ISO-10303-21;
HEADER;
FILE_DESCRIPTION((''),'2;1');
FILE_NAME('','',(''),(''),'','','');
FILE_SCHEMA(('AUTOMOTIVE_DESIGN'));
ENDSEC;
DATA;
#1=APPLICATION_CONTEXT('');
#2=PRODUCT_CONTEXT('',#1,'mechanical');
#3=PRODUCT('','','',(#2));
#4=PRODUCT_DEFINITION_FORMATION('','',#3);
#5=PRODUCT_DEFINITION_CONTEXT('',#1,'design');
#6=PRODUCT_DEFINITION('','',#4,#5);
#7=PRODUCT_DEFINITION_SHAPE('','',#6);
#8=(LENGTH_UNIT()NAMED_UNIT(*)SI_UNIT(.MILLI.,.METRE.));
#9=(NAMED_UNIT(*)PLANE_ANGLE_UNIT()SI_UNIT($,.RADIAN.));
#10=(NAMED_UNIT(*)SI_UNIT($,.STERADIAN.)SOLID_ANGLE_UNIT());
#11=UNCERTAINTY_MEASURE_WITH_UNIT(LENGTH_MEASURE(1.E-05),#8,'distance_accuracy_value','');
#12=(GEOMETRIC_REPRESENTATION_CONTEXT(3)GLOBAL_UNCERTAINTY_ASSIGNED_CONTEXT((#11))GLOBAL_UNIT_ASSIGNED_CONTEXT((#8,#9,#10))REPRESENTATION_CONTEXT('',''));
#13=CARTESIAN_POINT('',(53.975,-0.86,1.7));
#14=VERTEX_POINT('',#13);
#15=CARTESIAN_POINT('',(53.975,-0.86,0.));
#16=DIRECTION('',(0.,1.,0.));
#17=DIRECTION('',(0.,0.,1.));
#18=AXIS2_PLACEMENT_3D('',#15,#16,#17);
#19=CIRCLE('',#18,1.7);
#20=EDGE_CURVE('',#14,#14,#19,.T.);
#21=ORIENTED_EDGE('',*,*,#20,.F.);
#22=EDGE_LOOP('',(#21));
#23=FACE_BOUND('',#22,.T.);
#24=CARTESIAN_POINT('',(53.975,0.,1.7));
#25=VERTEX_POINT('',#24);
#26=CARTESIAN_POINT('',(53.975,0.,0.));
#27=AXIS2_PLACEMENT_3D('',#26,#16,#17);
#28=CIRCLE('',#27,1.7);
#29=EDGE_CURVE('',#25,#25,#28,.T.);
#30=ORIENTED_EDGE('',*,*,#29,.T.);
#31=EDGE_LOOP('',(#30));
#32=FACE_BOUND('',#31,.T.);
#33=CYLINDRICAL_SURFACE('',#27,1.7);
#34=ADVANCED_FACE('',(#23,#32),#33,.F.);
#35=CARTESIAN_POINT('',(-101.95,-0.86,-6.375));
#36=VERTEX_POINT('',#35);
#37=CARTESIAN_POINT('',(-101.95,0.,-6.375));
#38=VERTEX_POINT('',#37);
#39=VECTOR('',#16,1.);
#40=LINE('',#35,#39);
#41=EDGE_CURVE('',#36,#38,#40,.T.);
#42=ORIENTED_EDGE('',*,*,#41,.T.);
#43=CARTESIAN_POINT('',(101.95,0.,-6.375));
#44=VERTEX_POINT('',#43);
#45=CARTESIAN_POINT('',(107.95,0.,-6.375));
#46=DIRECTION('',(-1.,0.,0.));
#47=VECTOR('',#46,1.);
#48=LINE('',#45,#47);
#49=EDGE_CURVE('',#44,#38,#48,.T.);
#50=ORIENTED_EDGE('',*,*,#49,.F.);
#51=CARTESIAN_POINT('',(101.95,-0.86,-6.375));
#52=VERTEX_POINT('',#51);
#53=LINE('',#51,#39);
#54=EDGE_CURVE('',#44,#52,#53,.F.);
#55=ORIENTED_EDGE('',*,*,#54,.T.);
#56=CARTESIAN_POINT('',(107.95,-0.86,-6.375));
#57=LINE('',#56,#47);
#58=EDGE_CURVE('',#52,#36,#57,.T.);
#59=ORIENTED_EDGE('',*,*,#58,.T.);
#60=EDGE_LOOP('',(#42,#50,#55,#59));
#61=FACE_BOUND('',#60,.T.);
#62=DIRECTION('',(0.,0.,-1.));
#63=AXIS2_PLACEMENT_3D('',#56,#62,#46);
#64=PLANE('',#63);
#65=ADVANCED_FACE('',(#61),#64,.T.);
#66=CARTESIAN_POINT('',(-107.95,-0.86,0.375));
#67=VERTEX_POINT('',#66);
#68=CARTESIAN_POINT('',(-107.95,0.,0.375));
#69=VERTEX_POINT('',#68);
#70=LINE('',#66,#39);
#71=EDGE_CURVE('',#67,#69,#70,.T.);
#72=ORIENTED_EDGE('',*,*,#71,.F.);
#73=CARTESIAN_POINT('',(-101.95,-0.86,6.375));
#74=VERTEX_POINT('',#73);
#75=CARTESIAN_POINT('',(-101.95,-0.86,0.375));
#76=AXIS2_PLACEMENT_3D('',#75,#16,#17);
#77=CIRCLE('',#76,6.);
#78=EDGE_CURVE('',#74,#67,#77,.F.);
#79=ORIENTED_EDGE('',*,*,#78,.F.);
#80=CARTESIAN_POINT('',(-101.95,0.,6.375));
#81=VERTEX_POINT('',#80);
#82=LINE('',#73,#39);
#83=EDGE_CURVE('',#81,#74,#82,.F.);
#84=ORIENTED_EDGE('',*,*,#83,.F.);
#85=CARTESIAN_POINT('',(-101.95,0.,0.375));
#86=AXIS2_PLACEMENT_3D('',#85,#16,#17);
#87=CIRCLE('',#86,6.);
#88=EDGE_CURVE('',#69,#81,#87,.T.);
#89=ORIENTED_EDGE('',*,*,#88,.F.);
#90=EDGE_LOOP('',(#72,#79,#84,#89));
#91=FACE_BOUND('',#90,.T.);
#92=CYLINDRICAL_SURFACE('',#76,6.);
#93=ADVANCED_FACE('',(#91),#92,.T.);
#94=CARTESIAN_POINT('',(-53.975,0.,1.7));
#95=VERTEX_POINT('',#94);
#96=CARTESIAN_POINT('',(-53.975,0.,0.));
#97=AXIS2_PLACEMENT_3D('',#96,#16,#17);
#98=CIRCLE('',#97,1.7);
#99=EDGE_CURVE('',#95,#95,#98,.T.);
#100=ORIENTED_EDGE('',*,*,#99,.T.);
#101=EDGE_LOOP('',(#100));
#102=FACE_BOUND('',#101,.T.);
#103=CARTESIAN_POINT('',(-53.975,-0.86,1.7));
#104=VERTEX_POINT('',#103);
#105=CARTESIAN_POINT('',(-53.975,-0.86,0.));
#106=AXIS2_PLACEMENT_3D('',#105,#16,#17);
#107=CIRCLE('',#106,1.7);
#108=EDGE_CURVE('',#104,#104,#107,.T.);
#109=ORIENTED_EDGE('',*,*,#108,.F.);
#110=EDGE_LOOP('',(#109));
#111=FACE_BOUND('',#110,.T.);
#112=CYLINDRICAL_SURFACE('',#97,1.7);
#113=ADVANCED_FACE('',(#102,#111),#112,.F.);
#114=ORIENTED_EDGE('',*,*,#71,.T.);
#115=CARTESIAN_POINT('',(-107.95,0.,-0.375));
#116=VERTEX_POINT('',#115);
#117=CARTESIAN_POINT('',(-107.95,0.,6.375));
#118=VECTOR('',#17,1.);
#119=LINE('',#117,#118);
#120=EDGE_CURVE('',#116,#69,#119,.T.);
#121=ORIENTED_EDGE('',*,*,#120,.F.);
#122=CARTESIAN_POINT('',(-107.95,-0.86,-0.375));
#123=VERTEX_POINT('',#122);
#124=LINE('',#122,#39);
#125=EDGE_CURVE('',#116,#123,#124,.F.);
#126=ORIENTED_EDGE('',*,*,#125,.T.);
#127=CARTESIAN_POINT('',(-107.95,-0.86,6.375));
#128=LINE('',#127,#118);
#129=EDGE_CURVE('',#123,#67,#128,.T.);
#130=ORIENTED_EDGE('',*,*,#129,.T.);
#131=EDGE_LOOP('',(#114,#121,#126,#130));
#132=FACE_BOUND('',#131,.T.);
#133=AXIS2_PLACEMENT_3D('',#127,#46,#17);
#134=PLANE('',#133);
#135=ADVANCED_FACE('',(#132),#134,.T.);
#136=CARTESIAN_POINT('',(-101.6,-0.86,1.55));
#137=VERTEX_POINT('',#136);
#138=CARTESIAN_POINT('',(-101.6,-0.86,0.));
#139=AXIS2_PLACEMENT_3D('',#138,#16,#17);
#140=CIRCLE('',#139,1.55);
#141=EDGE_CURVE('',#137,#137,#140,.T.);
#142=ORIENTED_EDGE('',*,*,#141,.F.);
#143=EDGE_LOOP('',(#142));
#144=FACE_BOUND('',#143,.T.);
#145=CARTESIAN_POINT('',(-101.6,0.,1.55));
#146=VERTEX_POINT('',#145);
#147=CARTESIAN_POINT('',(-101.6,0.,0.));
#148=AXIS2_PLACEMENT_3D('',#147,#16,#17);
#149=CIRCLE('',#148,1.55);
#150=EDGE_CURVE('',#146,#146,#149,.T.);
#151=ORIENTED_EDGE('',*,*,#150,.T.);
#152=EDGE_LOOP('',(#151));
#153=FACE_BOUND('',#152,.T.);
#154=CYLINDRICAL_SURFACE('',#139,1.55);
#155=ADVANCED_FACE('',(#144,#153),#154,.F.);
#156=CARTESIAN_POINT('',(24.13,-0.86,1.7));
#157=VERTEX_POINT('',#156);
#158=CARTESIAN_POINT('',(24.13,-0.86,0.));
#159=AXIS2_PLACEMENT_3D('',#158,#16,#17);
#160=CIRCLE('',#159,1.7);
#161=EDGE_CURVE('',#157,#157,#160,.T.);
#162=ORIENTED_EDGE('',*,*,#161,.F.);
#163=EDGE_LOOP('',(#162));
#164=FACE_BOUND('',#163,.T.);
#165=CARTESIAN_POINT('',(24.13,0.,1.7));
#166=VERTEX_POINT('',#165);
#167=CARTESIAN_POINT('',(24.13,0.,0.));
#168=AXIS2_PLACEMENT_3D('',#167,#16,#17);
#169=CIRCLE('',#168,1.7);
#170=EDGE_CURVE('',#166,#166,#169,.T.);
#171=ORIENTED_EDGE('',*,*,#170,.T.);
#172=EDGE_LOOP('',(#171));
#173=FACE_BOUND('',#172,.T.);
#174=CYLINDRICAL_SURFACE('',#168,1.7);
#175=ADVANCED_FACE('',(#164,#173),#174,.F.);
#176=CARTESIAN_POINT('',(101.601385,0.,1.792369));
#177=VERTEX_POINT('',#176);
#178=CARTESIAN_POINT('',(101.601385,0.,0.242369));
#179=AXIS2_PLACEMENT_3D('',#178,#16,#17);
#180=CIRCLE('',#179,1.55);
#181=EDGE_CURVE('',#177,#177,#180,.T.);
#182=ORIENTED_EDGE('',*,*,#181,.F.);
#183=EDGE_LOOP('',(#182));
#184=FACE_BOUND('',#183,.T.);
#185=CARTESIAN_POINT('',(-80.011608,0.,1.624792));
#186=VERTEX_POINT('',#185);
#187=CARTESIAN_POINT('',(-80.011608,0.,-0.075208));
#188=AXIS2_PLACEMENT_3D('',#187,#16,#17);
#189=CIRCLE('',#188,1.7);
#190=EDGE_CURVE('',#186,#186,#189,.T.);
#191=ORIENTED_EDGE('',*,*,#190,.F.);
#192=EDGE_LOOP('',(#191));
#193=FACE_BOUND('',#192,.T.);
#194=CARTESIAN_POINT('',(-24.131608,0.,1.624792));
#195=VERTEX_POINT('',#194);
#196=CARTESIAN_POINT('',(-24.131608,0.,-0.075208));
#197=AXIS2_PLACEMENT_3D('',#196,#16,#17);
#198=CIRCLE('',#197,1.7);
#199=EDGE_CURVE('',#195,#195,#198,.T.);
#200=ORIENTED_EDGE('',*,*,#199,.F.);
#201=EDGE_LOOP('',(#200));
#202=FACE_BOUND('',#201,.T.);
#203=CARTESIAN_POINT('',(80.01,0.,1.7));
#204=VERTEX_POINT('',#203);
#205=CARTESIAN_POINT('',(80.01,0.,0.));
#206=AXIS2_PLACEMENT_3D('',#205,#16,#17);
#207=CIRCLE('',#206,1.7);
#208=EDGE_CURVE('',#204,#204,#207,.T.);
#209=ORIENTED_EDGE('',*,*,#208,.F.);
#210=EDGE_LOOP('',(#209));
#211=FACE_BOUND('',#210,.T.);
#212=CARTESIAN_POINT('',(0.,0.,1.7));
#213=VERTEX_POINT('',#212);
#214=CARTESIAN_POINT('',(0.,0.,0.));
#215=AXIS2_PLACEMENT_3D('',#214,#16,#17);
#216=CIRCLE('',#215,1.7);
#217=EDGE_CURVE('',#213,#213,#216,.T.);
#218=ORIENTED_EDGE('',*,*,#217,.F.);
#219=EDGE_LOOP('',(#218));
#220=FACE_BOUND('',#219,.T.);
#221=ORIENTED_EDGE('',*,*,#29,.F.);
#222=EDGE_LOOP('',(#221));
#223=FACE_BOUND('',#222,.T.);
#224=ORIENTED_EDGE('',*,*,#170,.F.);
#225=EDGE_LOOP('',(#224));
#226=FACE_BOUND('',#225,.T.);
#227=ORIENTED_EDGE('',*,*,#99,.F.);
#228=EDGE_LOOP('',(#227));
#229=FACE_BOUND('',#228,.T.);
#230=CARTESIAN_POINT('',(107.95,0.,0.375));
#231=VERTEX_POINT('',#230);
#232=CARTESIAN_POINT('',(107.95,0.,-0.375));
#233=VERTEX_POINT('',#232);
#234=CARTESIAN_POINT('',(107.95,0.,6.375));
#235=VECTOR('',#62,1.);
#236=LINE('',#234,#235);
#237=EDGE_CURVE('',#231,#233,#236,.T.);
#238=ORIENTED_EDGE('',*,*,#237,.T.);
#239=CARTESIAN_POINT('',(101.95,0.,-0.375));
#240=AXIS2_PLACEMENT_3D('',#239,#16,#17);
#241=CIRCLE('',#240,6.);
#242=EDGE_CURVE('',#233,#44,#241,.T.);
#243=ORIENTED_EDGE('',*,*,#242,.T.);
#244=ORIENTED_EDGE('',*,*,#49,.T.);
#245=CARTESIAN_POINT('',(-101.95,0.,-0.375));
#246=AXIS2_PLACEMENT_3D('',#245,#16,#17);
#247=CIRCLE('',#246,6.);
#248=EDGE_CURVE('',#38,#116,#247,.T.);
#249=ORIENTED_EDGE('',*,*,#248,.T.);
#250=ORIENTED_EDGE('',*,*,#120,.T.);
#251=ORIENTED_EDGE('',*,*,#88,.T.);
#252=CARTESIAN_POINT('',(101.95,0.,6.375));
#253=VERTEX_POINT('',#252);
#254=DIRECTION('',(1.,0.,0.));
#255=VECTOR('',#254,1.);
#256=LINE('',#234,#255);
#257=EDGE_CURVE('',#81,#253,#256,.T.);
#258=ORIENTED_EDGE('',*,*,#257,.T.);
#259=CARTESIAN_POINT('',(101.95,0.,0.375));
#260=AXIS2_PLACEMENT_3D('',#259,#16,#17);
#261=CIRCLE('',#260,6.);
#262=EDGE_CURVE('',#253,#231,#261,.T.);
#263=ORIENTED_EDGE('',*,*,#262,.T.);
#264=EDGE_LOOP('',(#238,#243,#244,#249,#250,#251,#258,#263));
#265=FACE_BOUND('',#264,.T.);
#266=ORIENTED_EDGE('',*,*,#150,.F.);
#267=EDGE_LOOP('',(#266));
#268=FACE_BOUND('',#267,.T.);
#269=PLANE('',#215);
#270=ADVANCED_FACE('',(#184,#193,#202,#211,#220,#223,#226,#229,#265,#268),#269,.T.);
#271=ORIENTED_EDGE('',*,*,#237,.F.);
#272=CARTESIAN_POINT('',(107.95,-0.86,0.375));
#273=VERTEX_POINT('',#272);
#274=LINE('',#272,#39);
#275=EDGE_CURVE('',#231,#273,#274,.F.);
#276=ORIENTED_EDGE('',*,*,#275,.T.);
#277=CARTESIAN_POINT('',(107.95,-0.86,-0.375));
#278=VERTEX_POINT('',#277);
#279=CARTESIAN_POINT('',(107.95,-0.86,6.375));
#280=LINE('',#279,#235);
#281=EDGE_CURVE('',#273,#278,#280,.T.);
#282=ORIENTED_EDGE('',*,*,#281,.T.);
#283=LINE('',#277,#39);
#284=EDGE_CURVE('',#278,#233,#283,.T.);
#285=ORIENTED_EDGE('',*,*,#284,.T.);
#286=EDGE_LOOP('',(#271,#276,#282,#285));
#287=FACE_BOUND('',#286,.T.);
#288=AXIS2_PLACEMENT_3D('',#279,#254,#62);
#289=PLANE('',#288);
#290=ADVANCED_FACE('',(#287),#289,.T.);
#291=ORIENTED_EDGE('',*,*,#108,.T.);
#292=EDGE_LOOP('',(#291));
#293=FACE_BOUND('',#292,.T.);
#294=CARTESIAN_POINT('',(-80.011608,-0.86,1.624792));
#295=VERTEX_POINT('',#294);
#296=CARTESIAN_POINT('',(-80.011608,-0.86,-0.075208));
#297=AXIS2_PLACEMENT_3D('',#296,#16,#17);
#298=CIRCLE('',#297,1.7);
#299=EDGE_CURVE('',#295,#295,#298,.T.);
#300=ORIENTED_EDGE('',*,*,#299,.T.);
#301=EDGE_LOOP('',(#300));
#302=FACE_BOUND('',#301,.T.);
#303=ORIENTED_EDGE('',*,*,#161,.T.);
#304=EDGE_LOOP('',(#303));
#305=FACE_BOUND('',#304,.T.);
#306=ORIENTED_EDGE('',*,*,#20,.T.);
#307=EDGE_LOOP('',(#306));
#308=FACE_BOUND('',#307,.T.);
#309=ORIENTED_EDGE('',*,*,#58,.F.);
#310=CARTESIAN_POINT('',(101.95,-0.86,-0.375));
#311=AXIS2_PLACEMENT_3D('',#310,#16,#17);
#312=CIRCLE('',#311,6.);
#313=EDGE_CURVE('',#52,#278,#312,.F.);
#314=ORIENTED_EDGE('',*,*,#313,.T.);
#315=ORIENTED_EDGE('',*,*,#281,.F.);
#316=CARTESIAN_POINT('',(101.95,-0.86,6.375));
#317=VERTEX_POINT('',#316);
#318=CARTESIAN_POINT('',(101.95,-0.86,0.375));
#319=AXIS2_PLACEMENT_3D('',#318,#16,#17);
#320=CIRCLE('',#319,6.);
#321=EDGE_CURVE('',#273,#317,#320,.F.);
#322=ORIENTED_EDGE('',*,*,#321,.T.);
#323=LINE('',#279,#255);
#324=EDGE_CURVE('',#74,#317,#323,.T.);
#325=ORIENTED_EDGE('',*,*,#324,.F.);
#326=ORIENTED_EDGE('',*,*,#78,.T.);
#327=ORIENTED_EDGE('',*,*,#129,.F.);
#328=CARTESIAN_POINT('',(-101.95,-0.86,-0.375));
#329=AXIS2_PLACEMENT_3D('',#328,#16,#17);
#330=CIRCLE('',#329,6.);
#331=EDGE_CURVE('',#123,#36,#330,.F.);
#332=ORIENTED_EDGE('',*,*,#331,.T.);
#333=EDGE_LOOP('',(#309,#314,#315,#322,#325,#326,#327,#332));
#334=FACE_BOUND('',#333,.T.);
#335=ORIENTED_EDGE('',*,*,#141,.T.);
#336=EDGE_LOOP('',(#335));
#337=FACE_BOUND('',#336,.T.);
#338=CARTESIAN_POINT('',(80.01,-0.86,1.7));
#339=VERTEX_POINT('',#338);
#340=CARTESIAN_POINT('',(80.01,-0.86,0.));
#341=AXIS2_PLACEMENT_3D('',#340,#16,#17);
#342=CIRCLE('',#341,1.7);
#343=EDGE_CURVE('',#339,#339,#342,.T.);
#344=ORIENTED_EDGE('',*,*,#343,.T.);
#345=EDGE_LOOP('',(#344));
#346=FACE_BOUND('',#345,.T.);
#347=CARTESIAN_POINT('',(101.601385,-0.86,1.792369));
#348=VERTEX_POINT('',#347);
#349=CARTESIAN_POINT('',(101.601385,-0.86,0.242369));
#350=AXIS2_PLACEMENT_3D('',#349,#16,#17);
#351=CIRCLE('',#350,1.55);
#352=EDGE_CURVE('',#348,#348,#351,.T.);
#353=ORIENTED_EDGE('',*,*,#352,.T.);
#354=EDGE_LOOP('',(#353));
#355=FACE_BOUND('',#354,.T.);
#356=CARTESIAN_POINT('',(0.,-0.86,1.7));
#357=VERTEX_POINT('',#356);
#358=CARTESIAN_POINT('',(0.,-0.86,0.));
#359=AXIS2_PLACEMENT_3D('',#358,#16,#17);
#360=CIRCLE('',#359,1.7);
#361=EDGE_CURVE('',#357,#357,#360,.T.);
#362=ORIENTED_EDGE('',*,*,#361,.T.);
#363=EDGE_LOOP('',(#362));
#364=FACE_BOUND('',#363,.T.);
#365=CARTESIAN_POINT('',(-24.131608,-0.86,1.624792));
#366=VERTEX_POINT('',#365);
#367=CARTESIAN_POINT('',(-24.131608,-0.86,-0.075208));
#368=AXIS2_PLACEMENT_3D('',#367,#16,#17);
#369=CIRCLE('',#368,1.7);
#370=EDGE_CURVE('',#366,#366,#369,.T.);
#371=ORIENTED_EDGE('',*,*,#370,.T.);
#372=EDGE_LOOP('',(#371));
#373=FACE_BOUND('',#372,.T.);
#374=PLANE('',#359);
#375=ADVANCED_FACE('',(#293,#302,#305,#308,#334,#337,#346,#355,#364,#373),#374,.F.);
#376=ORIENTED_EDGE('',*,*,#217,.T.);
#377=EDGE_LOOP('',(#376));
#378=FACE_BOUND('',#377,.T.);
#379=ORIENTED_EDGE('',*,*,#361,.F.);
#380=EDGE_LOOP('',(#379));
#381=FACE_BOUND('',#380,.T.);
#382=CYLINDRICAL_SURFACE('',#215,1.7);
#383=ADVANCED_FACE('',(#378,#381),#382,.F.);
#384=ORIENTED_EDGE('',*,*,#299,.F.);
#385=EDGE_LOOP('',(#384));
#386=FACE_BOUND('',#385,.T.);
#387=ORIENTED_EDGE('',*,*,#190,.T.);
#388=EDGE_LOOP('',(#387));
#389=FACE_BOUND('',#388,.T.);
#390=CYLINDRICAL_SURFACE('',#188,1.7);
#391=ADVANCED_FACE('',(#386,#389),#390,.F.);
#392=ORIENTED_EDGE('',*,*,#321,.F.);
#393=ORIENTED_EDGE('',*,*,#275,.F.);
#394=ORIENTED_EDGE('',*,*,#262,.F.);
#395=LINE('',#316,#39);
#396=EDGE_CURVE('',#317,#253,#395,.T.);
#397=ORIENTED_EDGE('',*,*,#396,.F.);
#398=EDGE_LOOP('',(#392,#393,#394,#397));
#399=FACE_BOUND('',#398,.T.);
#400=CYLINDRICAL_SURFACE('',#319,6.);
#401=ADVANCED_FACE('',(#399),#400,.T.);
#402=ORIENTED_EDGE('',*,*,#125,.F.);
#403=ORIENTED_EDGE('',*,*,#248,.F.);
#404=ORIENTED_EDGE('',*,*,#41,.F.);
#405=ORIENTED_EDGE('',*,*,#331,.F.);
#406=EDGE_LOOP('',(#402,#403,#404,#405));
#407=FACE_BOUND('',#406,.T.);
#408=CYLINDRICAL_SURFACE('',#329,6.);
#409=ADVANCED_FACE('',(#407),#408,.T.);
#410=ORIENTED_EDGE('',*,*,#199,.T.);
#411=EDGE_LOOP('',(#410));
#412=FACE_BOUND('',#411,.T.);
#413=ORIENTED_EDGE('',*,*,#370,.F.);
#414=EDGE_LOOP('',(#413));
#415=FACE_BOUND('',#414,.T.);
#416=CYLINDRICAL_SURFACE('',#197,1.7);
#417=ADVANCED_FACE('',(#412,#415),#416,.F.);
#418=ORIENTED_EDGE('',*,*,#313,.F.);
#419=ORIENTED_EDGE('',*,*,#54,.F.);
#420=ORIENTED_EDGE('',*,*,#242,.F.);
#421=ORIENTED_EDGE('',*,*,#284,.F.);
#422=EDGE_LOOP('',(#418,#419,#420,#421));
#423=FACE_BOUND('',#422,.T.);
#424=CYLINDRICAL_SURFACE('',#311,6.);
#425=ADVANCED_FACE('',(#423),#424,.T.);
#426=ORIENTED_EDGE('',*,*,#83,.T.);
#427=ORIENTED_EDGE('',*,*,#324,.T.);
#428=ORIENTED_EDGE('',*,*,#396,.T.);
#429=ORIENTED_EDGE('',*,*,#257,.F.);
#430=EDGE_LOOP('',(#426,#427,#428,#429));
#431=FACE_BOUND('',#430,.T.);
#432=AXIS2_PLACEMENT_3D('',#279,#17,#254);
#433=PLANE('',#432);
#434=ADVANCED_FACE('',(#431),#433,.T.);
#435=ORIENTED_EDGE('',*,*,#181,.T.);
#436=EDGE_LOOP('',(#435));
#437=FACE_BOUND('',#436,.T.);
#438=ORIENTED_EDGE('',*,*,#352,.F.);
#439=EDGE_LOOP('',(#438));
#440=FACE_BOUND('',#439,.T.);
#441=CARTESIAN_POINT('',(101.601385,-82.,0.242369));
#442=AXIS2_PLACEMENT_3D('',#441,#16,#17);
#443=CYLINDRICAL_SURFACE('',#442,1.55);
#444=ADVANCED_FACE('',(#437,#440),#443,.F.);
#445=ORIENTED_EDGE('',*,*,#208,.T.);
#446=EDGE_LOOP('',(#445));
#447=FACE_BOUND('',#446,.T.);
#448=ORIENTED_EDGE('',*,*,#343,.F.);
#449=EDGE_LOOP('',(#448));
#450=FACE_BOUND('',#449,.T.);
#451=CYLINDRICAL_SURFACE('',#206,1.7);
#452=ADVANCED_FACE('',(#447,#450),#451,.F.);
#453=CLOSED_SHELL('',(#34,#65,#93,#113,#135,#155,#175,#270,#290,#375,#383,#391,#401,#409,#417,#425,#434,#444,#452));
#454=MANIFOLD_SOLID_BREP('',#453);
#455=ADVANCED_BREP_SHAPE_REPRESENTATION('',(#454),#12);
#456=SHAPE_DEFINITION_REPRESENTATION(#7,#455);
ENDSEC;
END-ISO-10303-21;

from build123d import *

# Parameters (mm, degrees)
SKETCH1_W                = 215.9
SKETCH1_H                = 12.75
SKETCH1_R                = 1.55
BASE_FLANGE1_DEPTH       = 0.86
FILLET1_R                = 6
M3_CLEARANCE_HOLE1_D     = 3.4
M3_CLEARANCE_HOLE1_DEPTH = 1.29
M3_CLEARANCE_HOLE1_TIP   = 1.021463052
M3_CLEARANCE_HOLE2_D     = 3.4
M3_CLEARANCE_HOLE2_DEPTH = 1.29
M3_CLEARANCE_HOLE2_TIP   = 1.021463052
SKETCH14_R               = 1.55
CUT_EXTRUDE1_DEPTH       = 82


# Sheet-metal steps are written as plain solids
with BuildPart() as part:
    # Sketch1 → Base-Flange1 (new body)
    with BuildSketch(Plane(origin=(0, 0, 0), x_dir=(1, 0, 0), z_dir=(0, 1, 0))):
        Rectangle(SKETCH1_W, SKETCH1_H)
        with Locations(Location((-101.6, 0, 0), (0, 0, 270))):
            Circle(SKETCH1_R, mode=Mode.SUBTRACT)
    extrude(amount=-BASE_FLANGE1_DEPTH)

    # Fillet1
    fillet1_edges = [part.edges().sort_by_distance(p)[0] for p in [
        (-107.95, -0.43, -6.375),
        (107.95, -0.43, -6.375),
        (107.95, -0.43, 6.375),
        (-107.95, -0.43, 6.375),
    ]]
    fillet(fillet1_edges, radius=FILLET1_R)

    # M3 Clearance Hole1
    with Locations(Plane(origin=(0, 0, 0), x_dir=(1, 0, 0), z_dir=(0, 1, 0))):
        with Locations((-80.011608413, 0.075207541), (-24.131608413, 0.075207541), (80.01, 0), (24.13, 0)):
            Hole(M3_CLEARANCE_HOLE1_D / 2, depth=M3_CLEARANCE_HOLE1_DEPTH)
            with Locations((0, 0, -(M3_CLEARANCE_HOLE1_DEPTH + M3_CLEARANCE_HOLE1_TIP / 2))):  # 118° drill point
                Cone(0, M3_CLEARANCE_HOLE1_D / 2, M3_CLEARANCE_HOLE1_TIP, mode=Mode.SUBTRACT)

    # M3 Clearance Hole2
    with Locations(Plane(origin=(0, 0, 0), x_dir=(1, 0, 0), z_dir=(0, 1, 0))):
        with Locations((0, 0), (-53.975, 0), (53.975, 0)):
            Hole(M3_CLEARANCE_HOLE2_D / 2, depth=M3_CLEARANCE_HOLE2_DEPTH)
            with Locations((0, 0, -(M3_CLEARANCE_HOLE2_DEPTH + M3_CLEARANCE_HOLE2_TIP / 2))):  # 118° drill point
                Cone(0, M3_CLEARANCE_HOLE2_D / 2, M3_CLEARANCE_HOLE2_TIP, mode=Mode.SUBTRACT)

    # Sketch14 → Cut-Extrude1 (cut)
    with BuildSketch(Plane(origin=(0, 0, 0), x_dir=(1, 0, 0), z_dir=(0, 1, 0))):
        with Locations(Location((101.601385273, -0.242368773, 0), (0, 0, 270))):
            Circle(SKETCH14_R)
    extrude(amount=-CUT_EXTRUDE1_DEPTH, mode=Mode.SUBTRACT)


solid = part.part
